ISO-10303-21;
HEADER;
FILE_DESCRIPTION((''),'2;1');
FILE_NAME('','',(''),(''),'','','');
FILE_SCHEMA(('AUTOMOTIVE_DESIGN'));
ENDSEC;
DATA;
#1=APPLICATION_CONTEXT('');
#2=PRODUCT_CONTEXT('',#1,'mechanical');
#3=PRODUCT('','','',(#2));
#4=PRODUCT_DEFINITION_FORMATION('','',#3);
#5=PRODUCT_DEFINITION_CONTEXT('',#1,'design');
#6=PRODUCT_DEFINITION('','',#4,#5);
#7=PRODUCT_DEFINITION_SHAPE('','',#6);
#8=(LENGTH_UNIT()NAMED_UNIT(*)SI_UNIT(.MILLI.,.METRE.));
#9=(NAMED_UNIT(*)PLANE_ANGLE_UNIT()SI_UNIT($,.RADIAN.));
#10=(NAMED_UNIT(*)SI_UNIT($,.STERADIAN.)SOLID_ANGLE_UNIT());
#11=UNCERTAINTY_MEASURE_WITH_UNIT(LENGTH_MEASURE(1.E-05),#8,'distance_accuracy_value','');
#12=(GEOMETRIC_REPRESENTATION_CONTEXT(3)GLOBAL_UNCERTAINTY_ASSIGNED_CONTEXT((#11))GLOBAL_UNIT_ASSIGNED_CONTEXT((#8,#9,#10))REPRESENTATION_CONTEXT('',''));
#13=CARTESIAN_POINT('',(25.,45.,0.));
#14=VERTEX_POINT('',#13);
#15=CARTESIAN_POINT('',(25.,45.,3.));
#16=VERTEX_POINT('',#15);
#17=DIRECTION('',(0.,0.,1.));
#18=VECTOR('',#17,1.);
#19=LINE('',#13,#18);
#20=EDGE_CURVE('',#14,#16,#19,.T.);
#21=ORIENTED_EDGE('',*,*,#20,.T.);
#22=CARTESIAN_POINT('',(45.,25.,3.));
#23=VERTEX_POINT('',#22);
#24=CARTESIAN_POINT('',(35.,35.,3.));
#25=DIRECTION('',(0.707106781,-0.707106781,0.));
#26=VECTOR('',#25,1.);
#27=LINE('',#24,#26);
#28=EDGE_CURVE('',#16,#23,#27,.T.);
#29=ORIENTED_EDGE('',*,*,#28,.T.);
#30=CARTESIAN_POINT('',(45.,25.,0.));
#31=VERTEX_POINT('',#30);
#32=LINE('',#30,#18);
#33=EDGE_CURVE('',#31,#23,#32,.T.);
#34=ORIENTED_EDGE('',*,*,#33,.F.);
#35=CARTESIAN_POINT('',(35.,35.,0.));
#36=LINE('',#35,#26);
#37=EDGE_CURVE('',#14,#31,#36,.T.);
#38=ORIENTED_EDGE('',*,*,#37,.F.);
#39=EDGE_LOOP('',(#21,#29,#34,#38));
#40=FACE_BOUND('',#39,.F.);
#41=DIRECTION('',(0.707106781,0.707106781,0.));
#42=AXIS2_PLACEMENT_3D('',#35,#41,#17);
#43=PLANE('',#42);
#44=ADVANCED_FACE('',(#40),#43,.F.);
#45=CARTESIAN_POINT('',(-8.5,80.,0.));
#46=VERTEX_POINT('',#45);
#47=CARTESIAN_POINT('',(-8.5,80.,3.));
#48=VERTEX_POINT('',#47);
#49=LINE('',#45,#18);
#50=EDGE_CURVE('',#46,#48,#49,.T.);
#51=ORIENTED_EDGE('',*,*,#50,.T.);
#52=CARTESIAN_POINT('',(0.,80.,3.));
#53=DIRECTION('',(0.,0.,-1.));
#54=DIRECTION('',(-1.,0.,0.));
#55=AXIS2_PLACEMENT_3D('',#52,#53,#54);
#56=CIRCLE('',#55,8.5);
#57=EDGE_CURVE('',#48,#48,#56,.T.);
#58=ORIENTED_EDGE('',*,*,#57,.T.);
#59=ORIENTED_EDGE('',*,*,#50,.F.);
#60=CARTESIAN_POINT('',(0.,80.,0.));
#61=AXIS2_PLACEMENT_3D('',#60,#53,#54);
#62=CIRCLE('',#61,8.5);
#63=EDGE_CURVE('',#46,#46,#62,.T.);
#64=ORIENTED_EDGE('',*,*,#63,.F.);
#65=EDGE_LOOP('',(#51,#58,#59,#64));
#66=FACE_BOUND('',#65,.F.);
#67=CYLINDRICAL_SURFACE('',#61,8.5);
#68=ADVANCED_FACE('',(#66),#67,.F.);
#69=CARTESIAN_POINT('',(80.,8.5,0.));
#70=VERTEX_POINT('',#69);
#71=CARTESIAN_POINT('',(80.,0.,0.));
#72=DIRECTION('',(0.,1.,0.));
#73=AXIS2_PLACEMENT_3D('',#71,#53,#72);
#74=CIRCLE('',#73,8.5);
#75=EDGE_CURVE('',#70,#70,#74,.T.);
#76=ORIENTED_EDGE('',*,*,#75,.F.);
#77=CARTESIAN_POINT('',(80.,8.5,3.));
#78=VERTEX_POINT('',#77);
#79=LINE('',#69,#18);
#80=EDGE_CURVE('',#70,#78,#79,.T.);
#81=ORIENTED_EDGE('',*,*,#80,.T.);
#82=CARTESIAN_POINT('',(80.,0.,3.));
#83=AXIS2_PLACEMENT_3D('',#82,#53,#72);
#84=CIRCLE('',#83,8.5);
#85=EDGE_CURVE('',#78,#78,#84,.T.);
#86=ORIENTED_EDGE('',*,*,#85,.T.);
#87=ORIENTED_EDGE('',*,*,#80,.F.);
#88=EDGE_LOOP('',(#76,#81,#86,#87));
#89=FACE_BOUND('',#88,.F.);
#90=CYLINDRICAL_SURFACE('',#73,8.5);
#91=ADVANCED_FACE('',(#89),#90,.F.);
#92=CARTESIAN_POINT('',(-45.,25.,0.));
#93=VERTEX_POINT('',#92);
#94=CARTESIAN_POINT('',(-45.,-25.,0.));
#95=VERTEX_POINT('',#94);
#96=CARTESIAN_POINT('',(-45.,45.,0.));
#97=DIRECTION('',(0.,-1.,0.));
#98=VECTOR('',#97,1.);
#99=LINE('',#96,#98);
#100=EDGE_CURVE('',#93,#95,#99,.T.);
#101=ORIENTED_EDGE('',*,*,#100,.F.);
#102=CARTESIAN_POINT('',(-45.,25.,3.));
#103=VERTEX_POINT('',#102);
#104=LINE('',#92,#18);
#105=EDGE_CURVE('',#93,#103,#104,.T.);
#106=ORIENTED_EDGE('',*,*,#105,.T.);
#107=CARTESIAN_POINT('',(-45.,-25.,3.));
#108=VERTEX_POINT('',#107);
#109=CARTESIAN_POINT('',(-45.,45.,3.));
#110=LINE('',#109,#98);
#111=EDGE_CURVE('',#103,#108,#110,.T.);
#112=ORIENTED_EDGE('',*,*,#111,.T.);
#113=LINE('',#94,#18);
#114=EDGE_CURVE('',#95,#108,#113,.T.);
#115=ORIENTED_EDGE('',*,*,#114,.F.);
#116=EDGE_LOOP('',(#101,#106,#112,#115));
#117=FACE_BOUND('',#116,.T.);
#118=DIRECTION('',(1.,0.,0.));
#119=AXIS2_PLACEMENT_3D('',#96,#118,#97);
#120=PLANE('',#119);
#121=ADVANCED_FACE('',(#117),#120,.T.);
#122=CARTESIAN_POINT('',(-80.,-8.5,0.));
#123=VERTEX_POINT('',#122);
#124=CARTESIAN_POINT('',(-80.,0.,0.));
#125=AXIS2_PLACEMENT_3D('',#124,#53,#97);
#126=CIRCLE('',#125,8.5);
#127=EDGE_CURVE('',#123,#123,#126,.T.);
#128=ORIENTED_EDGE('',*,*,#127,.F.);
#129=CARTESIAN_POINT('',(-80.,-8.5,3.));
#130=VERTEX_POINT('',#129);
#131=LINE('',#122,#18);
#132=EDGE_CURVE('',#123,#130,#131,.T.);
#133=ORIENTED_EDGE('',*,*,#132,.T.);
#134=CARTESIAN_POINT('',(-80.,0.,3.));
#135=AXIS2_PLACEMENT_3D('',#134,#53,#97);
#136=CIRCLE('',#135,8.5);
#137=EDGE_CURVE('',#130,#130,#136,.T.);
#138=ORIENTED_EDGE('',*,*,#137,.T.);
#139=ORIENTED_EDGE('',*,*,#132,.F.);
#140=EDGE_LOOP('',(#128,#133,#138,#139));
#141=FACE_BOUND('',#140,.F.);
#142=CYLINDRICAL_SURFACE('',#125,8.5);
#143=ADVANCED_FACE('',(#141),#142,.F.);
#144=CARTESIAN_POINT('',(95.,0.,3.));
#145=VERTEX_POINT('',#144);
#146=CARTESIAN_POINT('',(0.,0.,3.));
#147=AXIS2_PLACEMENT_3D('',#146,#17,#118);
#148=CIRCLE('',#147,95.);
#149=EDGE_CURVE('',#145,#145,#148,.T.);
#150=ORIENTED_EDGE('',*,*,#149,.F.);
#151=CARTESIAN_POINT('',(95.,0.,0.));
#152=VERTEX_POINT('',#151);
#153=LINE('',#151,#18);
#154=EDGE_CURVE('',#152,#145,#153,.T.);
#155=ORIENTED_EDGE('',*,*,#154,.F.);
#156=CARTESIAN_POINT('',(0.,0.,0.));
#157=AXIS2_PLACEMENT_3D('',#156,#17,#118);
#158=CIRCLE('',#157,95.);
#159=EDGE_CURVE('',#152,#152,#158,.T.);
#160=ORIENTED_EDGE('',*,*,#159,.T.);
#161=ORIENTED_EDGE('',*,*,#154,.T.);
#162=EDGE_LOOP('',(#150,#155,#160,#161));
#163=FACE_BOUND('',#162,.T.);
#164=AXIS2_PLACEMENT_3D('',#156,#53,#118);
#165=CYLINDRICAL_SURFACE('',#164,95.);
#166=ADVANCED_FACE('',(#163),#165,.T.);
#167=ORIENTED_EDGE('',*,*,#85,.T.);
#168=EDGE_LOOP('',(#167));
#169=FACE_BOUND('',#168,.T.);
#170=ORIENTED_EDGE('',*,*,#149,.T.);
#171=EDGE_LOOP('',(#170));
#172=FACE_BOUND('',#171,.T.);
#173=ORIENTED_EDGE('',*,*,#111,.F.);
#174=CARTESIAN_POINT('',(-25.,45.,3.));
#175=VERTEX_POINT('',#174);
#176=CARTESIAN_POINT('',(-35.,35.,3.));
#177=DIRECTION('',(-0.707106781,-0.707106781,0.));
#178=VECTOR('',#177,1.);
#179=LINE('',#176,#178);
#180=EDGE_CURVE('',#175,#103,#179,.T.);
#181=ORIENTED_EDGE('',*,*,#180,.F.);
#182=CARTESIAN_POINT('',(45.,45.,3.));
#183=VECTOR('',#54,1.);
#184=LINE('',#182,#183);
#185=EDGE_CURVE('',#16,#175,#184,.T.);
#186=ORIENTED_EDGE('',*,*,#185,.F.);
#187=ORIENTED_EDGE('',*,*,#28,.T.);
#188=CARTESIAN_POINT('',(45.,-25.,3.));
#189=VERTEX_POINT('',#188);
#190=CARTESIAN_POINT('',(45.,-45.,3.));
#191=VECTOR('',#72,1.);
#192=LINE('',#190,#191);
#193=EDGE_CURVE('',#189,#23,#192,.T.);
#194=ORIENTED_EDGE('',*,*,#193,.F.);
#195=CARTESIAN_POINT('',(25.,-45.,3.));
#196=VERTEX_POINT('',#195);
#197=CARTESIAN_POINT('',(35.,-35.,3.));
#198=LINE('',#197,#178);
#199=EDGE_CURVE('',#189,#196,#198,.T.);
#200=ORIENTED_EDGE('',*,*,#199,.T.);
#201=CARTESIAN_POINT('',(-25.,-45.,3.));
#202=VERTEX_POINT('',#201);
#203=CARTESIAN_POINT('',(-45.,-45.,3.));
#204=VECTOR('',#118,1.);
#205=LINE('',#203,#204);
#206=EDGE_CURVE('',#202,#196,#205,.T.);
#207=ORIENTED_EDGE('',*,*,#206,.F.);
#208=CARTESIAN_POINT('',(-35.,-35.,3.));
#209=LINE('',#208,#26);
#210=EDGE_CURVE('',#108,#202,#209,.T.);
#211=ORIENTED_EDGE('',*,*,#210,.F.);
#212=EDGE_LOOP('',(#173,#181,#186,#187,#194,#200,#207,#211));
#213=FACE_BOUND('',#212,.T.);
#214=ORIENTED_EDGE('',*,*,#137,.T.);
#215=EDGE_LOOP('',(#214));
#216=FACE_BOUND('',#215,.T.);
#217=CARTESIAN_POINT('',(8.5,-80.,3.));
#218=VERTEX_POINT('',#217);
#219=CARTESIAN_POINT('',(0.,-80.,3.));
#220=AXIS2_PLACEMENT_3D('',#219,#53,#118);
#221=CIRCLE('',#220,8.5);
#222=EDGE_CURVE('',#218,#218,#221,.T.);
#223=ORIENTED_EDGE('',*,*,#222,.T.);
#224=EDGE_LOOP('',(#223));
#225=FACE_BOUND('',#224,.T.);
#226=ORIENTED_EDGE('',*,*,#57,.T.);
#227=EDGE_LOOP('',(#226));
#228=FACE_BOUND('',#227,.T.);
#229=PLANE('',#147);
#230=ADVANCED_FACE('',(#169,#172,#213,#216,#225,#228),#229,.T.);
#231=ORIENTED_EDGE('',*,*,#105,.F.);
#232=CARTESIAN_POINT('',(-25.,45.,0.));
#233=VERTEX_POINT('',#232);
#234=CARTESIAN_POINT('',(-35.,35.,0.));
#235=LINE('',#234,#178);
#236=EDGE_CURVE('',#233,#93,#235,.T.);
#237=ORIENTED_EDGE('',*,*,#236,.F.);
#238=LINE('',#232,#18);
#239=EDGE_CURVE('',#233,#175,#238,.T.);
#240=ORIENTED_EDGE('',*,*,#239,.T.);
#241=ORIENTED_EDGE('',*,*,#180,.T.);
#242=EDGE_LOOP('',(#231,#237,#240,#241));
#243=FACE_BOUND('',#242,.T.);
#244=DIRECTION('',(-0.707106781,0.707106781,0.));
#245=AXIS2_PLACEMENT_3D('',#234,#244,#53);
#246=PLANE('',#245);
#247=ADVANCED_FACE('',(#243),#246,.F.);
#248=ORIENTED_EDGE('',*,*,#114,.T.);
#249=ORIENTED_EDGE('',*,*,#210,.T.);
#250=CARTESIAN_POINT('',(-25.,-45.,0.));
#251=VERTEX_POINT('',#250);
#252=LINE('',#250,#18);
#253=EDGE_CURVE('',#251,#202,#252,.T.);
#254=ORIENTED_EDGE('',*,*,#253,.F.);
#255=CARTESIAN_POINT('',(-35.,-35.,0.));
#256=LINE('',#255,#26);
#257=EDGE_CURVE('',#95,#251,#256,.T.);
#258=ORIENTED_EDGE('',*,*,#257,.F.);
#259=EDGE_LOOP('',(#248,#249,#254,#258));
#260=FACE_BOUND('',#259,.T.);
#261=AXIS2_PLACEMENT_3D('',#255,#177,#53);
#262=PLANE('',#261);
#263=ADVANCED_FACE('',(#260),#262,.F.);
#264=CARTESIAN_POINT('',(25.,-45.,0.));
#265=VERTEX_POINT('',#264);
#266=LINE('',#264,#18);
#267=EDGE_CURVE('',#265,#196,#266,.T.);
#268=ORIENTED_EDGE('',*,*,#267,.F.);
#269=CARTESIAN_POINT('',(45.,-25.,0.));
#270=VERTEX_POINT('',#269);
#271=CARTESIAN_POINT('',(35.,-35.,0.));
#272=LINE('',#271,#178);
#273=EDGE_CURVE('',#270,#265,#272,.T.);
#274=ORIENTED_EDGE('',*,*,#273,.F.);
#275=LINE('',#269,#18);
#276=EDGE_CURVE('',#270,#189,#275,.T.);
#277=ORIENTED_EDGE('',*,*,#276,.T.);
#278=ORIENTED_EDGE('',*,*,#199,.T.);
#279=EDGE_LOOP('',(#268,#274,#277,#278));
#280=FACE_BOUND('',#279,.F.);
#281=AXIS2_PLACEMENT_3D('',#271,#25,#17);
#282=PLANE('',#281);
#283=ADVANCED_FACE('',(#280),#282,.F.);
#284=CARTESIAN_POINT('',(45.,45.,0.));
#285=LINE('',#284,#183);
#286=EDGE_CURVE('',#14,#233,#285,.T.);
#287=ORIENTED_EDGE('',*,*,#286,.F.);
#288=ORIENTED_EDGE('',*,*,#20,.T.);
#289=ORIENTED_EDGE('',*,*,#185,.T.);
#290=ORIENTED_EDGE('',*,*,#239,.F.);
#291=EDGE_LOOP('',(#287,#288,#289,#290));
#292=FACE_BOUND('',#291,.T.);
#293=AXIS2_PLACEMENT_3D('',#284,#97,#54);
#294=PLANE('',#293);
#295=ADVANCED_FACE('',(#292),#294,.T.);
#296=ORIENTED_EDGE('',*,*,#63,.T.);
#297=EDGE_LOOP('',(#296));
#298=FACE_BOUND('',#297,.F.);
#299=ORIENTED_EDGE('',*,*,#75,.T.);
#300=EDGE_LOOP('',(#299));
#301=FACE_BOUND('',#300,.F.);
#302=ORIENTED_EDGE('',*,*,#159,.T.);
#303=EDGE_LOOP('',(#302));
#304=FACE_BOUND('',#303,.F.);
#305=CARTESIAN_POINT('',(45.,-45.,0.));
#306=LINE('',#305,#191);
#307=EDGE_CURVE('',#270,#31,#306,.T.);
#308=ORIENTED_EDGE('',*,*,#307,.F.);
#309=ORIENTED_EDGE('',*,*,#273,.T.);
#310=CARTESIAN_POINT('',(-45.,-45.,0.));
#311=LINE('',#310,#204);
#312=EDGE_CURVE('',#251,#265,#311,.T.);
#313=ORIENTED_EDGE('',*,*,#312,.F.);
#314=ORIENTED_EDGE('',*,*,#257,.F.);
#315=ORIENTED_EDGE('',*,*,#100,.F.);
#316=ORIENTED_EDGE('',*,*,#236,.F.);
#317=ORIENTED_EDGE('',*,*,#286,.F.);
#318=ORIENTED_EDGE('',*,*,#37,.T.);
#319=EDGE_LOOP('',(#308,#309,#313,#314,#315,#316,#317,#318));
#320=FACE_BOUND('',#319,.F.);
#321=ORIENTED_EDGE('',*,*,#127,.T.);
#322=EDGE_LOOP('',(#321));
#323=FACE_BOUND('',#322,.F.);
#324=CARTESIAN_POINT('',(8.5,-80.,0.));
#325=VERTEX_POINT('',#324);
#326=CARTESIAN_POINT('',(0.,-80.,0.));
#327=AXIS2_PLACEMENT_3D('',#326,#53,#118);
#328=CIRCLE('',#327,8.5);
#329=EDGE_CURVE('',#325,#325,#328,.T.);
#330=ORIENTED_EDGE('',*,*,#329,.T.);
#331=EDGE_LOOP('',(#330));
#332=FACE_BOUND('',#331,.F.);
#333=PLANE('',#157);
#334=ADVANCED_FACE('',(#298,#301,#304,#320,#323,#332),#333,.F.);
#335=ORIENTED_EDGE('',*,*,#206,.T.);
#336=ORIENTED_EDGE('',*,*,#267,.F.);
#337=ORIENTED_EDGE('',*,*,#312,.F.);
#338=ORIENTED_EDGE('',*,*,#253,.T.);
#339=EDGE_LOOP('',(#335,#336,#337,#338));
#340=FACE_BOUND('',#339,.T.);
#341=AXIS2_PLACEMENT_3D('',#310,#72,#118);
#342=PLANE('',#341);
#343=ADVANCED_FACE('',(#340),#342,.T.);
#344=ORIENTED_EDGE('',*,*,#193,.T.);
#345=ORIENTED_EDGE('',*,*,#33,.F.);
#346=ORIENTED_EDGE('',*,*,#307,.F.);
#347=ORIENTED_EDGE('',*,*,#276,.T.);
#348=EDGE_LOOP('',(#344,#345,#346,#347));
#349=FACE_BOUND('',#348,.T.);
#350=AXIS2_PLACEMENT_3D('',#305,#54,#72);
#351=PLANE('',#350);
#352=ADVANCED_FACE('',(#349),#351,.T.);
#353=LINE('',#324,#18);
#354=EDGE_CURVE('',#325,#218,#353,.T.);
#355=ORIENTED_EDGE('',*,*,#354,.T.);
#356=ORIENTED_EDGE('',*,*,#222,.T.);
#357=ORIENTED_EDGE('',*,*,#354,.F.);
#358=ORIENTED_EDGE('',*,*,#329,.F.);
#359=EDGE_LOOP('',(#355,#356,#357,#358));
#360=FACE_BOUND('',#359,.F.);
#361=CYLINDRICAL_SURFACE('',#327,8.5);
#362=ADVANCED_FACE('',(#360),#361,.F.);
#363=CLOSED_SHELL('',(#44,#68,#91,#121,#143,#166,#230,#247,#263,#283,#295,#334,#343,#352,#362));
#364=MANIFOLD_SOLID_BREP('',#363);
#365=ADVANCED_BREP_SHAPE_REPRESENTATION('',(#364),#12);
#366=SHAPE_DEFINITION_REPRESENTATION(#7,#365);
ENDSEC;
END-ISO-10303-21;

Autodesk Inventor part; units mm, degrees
ref_plane "YZ Plane" through (0, 0, 0) normal (1, 0, 0) x (0, 1, 0)
ref_plane "XZ Plane" through (0, 0, 0) normal (0, 1, 0) x (-1, 0, 0)
ref_plane "XY Plane" through (0, 0, 0) normal (0, 0, 1) x (1, 0, 0)
sketch "Sketch1" plane through (0, 0, 0) normal (0, 0, 1) x (1, 0, 0)
  circle A0 centre (0, 0) radius 95
  line L0 (45, 45) -> (-45, 45)
  line L1 (-45, 45) -> (-45, -45)
  line L2 (-45, -45) -> (45, -45)
  line L3 (45, -45) -> (45, 45)
  line L4 (45, 45) -> (-45, -45) construction
  line L5 (-45, 45) -> (45, -45) construction
  dimension "d157" = 190
  dimension "d158" = 90
  dimension "d159" = 90
extrude "Plate5" add sketch "Sketch1" along normal blind 3
sketch "Sketch7" plane through (0, 0, 0) normal (0, 0, -1) x (-1, 0, 0)
  circle A0 centre (0, 80) radius 8.5
  point P0 (0, 0)
  dimension "d160" = 17
  dimension "d161" = 80
extrude "Cut1" cut sketch "Sketch7" against normal blind 3
pattern_circular "Circular Pattern1" count 4 over 360 about axis through (0, 0, -10) along (0, 0, 1) of "Cut1"
chamfer "Corner Chamfer2" distance 20 angle 45 4 edges at (-45, -45, 1.5) (45, -45, 1.5) (-45, 45, 1.5) (45, 45, 1.5)
properties part number "PNS 754 FDS 1200 FLANGE"
